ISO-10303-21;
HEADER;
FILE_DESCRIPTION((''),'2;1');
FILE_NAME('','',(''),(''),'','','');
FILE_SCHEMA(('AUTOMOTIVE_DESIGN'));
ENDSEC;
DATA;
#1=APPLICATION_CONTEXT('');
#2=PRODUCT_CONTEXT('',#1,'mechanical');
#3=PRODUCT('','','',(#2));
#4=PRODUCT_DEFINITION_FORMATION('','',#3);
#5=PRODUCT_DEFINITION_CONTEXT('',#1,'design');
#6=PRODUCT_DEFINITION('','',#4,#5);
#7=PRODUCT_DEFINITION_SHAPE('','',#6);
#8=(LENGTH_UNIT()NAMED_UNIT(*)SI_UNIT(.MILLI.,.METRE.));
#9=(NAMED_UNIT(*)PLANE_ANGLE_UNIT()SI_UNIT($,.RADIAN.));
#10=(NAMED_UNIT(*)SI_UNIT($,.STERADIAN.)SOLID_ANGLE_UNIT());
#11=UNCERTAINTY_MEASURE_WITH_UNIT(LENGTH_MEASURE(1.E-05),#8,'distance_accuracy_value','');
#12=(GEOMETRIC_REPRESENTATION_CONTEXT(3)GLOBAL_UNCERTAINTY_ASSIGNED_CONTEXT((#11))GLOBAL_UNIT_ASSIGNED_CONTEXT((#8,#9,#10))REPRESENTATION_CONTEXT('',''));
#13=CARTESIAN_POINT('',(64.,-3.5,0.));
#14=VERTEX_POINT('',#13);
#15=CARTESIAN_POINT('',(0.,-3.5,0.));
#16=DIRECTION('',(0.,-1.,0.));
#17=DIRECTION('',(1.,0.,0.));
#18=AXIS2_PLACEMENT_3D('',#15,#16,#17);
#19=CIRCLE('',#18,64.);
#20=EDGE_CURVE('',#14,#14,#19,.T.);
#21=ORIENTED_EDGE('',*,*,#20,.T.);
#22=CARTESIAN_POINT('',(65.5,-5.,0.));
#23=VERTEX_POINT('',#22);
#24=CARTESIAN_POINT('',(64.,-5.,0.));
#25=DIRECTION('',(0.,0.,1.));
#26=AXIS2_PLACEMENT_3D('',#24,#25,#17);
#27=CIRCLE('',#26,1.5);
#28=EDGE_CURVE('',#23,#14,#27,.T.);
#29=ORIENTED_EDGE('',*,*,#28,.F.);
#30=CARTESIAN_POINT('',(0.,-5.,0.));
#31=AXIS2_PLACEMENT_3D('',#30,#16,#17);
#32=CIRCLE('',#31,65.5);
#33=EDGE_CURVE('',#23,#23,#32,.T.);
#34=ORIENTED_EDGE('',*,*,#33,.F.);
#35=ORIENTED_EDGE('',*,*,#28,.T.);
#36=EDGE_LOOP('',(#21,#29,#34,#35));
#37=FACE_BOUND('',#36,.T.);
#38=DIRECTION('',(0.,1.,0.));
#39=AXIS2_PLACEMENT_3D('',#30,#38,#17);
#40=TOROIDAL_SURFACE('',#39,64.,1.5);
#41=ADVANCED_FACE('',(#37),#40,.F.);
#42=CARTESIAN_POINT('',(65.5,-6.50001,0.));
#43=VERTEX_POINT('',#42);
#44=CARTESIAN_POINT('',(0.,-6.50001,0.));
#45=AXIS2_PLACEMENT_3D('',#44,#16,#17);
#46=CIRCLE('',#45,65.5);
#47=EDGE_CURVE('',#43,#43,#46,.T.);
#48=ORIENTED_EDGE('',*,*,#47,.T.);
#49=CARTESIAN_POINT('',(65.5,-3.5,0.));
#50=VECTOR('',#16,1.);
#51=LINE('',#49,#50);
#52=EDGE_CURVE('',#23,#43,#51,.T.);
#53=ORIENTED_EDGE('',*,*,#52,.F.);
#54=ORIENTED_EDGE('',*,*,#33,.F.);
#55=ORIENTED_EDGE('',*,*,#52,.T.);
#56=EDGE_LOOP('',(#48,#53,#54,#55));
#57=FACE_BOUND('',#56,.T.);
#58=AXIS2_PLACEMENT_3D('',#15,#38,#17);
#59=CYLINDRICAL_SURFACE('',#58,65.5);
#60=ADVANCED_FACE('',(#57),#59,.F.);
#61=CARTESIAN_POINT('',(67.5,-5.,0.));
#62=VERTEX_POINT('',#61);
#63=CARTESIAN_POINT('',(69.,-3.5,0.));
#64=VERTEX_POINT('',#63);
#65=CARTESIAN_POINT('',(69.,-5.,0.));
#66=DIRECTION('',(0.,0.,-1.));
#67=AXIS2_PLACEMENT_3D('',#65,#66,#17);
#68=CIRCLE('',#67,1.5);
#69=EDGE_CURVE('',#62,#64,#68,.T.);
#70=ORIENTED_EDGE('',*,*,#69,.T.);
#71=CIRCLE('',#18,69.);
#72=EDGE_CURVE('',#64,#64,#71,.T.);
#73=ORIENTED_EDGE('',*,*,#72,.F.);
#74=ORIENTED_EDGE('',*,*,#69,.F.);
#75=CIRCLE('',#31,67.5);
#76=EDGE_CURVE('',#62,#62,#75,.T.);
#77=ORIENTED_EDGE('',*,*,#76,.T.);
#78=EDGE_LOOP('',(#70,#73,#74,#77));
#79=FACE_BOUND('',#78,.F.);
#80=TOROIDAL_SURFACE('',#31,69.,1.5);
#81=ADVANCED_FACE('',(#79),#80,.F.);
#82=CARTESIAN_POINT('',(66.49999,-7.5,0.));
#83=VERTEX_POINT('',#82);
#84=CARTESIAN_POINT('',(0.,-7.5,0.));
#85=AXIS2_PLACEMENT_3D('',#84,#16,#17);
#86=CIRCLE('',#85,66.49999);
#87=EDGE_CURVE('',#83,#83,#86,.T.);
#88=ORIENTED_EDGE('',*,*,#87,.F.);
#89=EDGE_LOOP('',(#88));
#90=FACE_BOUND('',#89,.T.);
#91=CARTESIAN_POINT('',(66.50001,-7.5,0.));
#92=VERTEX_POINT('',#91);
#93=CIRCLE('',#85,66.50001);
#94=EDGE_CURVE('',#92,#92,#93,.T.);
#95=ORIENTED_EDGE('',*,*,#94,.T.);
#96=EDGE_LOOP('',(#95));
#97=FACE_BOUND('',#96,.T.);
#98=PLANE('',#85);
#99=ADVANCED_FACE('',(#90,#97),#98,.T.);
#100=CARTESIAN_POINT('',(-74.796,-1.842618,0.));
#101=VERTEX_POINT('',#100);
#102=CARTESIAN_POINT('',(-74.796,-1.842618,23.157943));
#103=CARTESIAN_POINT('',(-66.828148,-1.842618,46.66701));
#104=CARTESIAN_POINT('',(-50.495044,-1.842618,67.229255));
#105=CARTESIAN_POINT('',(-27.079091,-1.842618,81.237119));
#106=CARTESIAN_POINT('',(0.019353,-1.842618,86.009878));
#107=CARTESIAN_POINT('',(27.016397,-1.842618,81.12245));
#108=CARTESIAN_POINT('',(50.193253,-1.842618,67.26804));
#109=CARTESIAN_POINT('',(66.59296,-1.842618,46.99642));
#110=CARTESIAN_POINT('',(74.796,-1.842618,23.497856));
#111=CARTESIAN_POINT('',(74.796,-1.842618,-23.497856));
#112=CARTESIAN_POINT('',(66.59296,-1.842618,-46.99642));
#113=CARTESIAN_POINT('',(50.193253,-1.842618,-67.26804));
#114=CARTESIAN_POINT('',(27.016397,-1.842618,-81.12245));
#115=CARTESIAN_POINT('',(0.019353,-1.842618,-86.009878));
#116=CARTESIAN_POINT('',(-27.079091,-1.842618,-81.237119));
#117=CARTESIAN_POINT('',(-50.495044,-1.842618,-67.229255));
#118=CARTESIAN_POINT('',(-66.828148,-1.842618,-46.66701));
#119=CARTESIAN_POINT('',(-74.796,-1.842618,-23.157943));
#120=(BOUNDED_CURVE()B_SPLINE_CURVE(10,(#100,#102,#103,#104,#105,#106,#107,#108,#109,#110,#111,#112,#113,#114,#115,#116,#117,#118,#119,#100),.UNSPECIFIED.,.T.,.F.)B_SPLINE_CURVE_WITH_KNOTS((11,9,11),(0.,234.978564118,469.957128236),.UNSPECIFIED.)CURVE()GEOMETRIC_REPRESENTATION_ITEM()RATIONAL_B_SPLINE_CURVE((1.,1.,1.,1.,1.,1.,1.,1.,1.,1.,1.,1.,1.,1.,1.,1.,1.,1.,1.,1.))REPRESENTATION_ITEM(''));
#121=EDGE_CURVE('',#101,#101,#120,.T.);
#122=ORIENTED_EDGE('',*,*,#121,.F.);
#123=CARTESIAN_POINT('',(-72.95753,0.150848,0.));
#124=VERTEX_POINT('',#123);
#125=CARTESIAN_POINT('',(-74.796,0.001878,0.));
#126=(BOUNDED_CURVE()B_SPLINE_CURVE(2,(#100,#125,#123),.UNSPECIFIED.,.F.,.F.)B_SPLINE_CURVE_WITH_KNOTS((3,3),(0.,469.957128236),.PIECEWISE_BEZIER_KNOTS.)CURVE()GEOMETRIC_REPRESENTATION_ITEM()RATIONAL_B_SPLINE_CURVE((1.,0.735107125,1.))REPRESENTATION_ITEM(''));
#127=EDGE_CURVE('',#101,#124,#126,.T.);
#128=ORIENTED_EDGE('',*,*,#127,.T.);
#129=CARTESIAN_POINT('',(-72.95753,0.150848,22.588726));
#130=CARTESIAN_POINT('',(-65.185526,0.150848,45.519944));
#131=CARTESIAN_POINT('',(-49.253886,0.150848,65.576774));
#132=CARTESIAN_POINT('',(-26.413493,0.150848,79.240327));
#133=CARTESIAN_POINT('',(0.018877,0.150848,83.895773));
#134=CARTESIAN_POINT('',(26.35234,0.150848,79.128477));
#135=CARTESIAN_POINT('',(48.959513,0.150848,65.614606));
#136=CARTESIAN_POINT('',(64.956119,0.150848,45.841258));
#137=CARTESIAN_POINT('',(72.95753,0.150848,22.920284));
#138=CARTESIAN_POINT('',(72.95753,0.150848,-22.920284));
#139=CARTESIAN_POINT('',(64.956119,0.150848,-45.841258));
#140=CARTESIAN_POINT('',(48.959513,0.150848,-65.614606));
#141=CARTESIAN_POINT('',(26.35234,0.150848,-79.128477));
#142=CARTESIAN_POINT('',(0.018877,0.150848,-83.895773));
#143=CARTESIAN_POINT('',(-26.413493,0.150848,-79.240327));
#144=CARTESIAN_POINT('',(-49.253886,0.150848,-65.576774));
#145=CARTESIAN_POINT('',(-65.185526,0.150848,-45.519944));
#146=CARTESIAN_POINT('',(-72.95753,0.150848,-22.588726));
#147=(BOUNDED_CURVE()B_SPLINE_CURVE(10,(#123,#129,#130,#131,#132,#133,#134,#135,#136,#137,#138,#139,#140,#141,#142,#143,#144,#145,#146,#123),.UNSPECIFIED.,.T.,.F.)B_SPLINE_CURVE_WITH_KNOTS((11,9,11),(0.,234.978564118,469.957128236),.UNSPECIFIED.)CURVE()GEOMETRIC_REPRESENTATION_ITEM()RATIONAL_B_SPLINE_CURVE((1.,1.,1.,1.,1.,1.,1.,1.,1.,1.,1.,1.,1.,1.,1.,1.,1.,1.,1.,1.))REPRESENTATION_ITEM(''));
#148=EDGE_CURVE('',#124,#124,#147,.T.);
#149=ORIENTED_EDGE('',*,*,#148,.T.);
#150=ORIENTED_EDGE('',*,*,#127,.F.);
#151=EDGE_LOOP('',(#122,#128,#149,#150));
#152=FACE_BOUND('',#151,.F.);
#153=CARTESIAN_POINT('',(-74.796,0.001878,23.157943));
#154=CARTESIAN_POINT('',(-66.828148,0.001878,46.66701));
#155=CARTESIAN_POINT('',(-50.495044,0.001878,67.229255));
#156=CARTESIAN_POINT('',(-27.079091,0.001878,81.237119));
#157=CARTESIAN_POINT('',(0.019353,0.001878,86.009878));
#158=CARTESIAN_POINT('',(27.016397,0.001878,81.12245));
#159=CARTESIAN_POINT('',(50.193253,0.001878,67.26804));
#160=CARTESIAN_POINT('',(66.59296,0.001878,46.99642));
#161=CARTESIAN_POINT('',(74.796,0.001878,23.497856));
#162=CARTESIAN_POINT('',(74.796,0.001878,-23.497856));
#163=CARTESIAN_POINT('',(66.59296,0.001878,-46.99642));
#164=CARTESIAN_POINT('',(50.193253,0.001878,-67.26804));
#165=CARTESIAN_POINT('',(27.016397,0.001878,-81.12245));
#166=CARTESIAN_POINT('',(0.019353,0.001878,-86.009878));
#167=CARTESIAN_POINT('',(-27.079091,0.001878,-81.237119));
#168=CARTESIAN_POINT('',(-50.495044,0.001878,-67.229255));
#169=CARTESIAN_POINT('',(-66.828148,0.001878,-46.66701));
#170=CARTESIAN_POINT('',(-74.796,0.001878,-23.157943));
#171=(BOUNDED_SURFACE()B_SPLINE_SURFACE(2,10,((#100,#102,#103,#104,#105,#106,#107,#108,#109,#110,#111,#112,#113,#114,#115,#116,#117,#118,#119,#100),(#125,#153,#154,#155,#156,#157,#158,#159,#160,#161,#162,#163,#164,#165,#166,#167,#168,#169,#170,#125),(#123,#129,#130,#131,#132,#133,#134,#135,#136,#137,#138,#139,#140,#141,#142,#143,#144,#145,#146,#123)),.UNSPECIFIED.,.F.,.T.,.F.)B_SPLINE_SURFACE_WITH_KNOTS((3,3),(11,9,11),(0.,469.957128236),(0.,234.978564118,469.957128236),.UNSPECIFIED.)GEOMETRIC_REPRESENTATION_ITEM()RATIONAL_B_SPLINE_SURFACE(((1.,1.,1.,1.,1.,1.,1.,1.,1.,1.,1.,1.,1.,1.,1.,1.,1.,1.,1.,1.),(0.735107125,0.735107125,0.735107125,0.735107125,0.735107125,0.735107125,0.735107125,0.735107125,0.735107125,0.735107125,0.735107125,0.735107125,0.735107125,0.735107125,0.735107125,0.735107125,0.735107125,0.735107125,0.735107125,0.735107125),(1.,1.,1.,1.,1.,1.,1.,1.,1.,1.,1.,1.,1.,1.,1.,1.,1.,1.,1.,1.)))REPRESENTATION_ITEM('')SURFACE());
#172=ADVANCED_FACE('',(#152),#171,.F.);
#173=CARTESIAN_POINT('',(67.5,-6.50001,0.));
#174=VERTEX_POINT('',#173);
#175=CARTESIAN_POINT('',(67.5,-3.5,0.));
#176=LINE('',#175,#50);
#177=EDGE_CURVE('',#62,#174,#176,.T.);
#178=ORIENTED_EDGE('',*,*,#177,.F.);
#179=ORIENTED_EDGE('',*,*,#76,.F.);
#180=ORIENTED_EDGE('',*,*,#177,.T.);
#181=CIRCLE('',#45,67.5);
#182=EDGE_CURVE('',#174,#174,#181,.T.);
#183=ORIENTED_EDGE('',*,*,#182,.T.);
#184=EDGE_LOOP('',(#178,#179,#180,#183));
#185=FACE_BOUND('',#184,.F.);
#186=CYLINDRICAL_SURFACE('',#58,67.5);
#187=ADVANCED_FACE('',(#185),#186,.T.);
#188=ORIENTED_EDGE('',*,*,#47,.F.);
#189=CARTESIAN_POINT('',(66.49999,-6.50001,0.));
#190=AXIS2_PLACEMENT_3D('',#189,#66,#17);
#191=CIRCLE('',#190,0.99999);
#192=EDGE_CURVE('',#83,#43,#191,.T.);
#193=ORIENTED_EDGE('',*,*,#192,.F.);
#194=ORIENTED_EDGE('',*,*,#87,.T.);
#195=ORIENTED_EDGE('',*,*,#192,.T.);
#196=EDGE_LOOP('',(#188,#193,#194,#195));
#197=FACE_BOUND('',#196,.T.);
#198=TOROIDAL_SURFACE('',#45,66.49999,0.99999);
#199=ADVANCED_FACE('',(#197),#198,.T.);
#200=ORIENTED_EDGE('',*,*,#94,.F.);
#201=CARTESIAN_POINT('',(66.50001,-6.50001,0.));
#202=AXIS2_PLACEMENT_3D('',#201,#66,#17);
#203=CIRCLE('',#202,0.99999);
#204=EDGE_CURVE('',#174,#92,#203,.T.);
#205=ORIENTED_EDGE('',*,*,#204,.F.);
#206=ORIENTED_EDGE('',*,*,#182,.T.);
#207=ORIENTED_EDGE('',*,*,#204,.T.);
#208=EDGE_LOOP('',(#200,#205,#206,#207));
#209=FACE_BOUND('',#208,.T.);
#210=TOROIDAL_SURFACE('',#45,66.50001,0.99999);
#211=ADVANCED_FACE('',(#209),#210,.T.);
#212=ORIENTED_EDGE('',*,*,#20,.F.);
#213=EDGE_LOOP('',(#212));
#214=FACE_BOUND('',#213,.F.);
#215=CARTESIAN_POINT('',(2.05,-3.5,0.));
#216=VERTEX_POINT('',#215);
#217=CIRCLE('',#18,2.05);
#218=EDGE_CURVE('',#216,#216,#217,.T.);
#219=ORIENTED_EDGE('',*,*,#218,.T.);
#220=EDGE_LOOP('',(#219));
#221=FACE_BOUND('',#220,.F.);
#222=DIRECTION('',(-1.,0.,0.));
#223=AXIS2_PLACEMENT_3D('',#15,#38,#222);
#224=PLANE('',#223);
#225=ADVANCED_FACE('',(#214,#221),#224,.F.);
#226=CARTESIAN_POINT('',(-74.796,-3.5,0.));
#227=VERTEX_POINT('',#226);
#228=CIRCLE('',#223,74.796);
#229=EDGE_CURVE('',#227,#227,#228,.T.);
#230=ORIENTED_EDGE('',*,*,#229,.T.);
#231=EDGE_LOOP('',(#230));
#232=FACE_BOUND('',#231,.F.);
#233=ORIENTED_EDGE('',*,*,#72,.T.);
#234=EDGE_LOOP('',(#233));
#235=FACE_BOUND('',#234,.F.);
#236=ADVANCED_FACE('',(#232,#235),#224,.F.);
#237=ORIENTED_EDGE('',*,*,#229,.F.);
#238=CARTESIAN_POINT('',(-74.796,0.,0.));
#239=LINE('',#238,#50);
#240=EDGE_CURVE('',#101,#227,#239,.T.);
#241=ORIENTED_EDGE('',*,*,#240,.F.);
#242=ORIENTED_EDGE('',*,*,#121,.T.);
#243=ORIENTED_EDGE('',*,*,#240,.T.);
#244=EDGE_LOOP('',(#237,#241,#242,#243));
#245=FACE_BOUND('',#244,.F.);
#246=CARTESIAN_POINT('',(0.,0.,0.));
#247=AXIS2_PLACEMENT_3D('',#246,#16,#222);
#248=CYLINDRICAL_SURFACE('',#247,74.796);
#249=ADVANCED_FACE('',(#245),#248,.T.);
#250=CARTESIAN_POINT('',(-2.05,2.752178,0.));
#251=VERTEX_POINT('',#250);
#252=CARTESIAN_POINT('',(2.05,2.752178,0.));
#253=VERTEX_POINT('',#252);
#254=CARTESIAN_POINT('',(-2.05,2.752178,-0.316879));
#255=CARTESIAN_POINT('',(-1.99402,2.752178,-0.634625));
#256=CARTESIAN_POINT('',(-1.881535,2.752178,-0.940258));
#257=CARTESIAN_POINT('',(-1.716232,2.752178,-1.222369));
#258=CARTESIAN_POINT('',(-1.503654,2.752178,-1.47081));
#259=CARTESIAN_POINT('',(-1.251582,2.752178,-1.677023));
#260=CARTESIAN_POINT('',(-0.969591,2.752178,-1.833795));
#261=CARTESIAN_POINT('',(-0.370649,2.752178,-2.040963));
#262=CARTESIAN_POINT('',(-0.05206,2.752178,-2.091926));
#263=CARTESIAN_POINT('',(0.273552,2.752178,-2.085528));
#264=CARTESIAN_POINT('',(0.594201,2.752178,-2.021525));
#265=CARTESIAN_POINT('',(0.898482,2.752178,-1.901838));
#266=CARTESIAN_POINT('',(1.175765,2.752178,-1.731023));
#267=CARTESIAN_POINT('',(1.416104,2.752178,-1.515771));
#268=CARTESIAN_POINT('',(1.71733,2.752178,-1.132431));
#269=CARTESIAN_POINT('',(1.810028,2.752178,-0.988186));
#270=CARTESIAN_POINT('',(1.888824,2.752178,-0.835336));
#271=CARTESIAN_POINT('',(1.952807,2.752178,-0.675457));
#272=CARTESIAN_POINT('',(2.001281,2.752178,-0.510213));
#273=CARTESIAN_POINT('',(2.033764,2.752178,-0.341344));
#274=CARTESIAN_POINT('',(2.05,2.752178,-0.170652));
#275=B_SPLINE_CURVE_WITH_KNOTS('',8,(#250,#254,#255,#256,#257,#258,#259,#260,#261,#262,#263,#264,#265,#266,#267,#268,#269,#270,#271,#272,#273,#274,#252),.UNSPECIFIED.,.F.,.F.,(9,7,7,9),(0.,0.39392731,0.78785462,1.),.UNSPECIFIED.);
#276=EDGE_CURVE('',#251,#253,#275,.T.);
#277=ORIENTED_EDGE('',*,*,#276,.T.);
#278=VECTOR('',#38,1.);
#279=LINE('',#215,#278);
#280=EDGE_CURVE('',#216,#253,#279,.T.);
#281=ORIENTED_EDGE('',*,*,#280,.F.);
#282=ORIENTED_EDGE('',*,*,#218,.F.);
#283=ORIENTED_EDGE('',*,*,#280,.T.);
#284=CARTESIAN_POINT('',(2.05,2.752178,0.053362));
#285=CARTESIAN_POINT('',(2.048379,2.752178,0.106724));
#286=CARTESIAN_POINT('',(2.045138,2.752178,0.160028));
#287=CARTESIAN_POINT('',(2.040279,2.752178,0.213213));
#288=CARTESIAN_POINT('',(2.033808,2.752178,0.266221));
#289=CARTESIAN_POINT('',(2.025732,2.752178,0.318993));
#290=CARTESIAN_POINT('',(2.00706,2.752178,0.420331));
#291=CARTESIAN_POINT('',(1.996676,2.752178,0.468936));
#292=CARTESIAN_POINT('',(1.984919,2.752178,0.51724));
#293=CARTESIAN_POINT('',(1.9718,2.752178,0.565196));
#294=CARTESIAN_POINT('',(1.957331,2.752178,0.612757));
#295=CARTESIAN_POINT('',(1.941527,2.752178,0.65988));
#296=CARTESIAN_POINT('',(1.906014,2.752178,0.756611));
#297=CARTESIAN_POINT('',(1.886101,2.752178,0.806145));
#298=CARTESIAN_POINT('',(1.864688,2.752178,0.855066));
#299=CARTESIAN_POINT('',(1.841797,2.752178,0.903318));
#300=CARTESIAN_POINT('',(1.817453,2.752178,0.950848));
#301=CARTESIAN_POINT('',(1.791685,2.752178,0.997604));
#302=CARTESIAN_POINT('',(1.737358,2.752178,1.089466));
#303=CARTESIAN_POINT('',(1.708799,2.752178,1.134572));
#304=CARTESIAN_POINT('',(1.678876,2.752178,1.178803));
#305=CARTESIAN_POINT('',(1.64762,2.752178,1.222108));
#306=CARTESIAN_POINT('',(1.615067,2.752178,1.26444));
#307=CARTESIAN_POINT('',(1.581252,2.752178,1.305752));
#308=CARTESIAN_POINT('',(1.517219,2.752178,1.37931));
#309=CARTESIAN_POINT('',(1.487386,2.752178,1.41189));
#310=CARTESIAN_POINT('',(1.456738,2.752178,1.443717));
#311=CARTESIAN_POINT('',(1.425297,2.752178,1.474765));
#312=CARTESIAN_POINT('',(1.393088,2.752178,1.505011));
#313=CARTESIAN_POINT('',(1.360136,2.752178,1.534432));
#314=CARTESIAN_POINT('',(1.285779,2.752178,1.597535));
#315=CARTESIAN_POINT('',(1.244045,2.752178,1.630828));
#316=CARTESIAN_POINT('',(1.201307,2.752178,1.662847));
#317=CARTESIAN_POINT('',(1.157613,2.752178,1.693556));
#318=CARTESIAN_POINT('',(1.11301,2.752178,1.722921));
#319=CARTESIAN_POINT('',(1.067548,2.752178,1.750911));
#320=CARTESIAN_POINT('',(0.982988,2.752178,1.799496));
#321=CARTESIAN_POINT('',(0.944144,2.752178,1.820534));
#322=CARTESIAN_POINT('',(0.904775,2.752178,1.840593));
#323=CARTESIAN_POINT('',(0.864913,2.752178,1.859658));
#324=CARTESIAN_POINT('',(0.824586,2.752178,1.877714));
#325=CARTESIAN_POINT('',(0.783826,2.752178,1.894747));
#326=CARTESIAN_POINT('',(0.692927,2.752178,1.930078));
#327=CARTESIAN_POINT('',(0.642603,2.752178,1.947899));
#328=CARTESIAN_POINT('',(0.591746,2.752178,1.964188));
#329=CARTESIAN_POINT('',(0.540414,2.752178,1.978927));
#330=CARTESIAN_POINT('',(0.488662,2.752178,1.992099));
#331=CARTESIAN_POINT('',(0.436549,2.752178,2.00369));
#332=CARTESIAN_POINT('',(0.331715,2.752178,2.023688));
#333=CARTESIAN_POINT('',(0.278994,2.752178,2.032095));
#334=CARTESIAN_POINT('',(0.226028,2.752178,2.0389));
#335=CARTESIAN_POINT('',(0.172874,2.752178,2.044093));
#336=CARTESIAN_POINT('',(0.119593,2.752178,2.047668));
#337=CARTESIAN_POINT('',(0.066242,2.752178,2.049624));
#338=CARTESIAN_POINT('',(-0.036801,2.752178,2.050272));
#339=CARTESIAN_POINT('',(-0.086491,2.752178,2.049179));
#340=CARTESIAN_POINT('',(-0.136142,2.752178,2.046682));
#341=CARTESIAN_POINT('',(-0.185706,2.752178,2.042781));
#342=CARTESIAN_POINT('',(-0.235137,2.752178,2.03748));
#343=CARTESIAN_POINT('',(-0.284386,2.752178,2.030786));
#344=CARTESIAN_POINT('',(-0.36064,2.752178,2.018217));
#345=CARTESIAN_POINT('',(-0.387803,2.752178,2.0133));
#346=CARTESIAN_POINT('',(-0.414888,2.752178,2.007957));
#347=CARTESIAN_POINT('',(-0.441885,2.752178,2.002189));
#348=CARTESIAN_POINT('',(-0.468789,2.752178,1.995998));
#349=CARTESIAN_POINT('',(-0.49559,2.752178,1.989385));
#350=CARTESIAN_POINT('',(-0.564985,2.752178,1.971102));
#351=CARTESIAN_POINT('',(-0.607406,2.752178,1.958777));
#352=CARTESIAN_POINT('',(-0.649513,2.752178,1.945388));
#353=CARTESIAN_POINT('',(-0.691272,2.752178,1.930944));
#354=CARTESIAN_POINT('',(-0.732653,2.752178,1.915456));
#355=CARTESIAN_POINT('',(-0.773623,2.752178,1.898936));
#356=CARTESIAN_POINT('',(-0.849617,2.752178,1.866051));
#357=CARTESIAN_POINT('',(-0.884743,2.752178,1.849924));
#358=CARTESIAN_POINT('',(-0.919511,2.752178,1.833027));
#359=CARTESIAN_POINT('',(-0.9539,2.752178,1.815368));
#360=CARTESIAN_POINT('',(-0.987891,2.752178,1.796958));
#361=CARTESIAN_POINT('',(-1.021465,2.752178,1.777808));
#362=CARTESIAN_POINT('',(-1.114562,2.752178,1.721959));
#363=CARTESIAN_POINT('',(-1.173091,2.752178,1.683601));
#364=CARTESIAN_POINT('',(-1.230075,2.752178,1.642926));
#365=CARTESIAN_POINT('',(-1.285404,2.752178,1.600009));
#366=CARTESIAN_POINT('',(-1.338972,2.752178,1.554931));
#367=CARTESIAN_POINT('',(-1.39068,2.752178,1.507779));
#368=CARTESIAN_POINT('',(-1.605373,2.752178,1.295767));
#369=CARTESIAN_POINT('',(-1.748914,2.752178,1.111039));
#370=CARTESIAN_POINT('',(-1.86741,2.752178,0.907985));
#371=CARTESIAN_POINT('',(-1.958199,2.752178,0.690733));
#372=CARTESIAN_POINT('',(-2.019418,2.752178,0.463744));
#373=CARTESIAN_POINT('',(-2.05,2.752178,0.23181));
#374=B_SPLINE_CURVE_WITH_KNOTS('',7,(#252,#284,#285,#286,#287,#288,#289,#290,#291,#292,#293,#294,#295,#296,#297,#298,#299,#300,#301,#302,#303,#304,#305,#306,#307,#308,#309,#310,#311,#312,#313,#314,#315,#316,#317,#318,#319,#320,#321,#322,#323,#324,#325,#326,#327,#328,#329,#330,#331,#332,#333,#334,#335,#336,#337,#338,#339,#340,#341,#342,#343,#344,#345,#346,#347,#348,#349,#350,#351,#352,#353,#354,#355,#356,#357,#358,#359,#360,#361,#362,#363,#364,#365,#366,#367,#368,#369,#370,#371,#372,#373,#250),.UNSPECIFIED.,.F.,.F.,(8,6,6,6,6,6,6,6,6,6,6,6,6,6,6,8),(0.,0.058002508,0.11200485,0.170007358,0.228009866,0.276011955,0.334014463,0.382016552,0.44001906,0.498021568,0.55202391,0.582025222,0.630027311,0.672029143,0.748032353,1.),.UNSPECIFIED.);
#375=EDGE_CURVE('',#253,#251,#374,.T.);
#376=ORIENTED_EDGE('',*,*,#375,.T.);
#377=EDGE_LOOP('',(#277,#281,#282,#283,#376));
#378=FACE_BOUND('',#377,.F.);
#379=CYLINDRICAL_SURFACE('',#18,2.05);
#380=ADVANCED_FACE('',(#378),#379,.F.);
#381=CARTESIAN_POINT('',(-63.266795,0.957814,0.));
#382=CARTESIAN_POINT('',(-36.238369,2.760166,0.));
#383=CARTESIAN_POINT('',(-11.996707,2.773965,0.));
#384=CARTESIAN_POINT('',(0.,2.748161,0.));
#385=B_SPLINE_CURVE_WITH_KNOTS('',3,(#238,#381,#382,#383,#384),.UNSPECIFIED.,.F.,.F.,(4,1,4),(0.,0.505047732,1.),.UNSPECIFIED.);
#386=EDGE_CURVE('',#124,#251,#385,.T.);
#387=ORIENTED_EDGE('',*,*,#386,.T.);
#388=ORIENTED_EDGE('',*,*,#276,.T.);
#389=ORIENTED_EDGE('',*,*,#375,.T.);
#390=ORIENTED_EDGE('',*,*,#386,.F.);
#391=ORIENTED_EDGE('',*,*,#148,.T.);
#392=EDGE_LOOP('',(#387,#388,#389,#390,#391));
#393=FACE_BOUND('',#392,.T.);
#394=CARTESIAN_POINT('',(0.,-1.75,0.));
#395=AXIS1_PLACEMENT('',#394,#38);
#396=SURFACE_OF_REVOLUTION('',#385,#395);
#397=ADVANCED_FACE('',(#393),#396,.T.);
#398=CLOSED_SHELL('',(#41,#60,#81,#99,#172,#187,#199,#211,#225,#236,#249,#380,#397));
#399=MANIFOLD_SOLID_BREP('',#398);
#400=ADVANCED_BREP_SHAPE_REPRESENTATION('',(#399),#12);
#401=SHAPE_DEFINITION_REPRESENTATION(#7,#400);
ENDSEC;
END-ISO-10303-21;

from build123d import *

# Parameters (mm, degrees)
F2_R     = 67.5
F2_R_2   = 65.5
F3_DEPTH = 4
F4_R     = 0.99999
F5_R     = 1.5
F6_R     = 2
F7_R     = 2.05
F8_DEPTH = 6.2575644614


# Not quite as in the source:
# - a fillet or chamfer is up to 0.001 mm smaller than in the source, because OpenCascade refuses the exact size


with BuildPart() as f1:
    # F0 (on Top) → F1 (revolve)
    with BuildSketch(Plane.XY):
        with BuildLine():
            add(Edge.make_bspline(
                [(-74.796, 0), (-63.2667945233, 0.9578141715), (-36.2383694529, 2.7601661408), (-11.99670654, 2.7739654731), (0, 2.7481611414)],
                knots=[0, 0, 0, 0, 0.5050477324, 1, 1, 1, 1], degree=3))
            Line((-74.796, 0), (-74.796, -3.5))
            Line((-74.796, -3.5), (0, -3.5))
            Line((0, -3.5), (0, 0))
            Line((0, 0), (0, 2.7481611414))
        make_face()
    revolve(axis=Axis((0, -1.75, 0), (0, 1, 0)))

    # F2 (on face) → F3 (join)
    with BuildSketch(Plane.XZ.offset(3.5)):
        Circle(F2_R)
        Circle(F2_R_2, mode=Mode.SUBTRACT)
    extrude(amount=F3_DEPTH)

    # F4 (radius 1 in the source; OpenCascade refuses exactly that, so slightly less here)
    f4_edges = [f1.edges().sort_by_distance(p)[0] for p in [
        (-65.5, -7.5, 0),
        (-67.5, -7.5, 0),
    ]]
    fillet(f4_edges, radius=F4_R)

    # F5
    f5_edges = [f1.edges().sort_by_distance(p)[0] for p in [
        (-65.5, -3.5, 0),
        (-67.5, -3.5, 0),
    ]]
    fillet(f5_edges, radius=F5_R)

    # F6
    f6_edges = [f1.edges().sort_by_distance(p)[0] for p in [
        (74.796, 0, 0),
    ]]
    fillet(f6_edges, radius=F6_R)

    # F7 (on face) → F8 (cut, through all)
    with BuildSketch(Plane.XZ.offset(3.5)):
        Circle(F7_R)
    extrude(amount=-F8_DEPTH, mode=Mode.SUBTRACT)


solid = f1.part
